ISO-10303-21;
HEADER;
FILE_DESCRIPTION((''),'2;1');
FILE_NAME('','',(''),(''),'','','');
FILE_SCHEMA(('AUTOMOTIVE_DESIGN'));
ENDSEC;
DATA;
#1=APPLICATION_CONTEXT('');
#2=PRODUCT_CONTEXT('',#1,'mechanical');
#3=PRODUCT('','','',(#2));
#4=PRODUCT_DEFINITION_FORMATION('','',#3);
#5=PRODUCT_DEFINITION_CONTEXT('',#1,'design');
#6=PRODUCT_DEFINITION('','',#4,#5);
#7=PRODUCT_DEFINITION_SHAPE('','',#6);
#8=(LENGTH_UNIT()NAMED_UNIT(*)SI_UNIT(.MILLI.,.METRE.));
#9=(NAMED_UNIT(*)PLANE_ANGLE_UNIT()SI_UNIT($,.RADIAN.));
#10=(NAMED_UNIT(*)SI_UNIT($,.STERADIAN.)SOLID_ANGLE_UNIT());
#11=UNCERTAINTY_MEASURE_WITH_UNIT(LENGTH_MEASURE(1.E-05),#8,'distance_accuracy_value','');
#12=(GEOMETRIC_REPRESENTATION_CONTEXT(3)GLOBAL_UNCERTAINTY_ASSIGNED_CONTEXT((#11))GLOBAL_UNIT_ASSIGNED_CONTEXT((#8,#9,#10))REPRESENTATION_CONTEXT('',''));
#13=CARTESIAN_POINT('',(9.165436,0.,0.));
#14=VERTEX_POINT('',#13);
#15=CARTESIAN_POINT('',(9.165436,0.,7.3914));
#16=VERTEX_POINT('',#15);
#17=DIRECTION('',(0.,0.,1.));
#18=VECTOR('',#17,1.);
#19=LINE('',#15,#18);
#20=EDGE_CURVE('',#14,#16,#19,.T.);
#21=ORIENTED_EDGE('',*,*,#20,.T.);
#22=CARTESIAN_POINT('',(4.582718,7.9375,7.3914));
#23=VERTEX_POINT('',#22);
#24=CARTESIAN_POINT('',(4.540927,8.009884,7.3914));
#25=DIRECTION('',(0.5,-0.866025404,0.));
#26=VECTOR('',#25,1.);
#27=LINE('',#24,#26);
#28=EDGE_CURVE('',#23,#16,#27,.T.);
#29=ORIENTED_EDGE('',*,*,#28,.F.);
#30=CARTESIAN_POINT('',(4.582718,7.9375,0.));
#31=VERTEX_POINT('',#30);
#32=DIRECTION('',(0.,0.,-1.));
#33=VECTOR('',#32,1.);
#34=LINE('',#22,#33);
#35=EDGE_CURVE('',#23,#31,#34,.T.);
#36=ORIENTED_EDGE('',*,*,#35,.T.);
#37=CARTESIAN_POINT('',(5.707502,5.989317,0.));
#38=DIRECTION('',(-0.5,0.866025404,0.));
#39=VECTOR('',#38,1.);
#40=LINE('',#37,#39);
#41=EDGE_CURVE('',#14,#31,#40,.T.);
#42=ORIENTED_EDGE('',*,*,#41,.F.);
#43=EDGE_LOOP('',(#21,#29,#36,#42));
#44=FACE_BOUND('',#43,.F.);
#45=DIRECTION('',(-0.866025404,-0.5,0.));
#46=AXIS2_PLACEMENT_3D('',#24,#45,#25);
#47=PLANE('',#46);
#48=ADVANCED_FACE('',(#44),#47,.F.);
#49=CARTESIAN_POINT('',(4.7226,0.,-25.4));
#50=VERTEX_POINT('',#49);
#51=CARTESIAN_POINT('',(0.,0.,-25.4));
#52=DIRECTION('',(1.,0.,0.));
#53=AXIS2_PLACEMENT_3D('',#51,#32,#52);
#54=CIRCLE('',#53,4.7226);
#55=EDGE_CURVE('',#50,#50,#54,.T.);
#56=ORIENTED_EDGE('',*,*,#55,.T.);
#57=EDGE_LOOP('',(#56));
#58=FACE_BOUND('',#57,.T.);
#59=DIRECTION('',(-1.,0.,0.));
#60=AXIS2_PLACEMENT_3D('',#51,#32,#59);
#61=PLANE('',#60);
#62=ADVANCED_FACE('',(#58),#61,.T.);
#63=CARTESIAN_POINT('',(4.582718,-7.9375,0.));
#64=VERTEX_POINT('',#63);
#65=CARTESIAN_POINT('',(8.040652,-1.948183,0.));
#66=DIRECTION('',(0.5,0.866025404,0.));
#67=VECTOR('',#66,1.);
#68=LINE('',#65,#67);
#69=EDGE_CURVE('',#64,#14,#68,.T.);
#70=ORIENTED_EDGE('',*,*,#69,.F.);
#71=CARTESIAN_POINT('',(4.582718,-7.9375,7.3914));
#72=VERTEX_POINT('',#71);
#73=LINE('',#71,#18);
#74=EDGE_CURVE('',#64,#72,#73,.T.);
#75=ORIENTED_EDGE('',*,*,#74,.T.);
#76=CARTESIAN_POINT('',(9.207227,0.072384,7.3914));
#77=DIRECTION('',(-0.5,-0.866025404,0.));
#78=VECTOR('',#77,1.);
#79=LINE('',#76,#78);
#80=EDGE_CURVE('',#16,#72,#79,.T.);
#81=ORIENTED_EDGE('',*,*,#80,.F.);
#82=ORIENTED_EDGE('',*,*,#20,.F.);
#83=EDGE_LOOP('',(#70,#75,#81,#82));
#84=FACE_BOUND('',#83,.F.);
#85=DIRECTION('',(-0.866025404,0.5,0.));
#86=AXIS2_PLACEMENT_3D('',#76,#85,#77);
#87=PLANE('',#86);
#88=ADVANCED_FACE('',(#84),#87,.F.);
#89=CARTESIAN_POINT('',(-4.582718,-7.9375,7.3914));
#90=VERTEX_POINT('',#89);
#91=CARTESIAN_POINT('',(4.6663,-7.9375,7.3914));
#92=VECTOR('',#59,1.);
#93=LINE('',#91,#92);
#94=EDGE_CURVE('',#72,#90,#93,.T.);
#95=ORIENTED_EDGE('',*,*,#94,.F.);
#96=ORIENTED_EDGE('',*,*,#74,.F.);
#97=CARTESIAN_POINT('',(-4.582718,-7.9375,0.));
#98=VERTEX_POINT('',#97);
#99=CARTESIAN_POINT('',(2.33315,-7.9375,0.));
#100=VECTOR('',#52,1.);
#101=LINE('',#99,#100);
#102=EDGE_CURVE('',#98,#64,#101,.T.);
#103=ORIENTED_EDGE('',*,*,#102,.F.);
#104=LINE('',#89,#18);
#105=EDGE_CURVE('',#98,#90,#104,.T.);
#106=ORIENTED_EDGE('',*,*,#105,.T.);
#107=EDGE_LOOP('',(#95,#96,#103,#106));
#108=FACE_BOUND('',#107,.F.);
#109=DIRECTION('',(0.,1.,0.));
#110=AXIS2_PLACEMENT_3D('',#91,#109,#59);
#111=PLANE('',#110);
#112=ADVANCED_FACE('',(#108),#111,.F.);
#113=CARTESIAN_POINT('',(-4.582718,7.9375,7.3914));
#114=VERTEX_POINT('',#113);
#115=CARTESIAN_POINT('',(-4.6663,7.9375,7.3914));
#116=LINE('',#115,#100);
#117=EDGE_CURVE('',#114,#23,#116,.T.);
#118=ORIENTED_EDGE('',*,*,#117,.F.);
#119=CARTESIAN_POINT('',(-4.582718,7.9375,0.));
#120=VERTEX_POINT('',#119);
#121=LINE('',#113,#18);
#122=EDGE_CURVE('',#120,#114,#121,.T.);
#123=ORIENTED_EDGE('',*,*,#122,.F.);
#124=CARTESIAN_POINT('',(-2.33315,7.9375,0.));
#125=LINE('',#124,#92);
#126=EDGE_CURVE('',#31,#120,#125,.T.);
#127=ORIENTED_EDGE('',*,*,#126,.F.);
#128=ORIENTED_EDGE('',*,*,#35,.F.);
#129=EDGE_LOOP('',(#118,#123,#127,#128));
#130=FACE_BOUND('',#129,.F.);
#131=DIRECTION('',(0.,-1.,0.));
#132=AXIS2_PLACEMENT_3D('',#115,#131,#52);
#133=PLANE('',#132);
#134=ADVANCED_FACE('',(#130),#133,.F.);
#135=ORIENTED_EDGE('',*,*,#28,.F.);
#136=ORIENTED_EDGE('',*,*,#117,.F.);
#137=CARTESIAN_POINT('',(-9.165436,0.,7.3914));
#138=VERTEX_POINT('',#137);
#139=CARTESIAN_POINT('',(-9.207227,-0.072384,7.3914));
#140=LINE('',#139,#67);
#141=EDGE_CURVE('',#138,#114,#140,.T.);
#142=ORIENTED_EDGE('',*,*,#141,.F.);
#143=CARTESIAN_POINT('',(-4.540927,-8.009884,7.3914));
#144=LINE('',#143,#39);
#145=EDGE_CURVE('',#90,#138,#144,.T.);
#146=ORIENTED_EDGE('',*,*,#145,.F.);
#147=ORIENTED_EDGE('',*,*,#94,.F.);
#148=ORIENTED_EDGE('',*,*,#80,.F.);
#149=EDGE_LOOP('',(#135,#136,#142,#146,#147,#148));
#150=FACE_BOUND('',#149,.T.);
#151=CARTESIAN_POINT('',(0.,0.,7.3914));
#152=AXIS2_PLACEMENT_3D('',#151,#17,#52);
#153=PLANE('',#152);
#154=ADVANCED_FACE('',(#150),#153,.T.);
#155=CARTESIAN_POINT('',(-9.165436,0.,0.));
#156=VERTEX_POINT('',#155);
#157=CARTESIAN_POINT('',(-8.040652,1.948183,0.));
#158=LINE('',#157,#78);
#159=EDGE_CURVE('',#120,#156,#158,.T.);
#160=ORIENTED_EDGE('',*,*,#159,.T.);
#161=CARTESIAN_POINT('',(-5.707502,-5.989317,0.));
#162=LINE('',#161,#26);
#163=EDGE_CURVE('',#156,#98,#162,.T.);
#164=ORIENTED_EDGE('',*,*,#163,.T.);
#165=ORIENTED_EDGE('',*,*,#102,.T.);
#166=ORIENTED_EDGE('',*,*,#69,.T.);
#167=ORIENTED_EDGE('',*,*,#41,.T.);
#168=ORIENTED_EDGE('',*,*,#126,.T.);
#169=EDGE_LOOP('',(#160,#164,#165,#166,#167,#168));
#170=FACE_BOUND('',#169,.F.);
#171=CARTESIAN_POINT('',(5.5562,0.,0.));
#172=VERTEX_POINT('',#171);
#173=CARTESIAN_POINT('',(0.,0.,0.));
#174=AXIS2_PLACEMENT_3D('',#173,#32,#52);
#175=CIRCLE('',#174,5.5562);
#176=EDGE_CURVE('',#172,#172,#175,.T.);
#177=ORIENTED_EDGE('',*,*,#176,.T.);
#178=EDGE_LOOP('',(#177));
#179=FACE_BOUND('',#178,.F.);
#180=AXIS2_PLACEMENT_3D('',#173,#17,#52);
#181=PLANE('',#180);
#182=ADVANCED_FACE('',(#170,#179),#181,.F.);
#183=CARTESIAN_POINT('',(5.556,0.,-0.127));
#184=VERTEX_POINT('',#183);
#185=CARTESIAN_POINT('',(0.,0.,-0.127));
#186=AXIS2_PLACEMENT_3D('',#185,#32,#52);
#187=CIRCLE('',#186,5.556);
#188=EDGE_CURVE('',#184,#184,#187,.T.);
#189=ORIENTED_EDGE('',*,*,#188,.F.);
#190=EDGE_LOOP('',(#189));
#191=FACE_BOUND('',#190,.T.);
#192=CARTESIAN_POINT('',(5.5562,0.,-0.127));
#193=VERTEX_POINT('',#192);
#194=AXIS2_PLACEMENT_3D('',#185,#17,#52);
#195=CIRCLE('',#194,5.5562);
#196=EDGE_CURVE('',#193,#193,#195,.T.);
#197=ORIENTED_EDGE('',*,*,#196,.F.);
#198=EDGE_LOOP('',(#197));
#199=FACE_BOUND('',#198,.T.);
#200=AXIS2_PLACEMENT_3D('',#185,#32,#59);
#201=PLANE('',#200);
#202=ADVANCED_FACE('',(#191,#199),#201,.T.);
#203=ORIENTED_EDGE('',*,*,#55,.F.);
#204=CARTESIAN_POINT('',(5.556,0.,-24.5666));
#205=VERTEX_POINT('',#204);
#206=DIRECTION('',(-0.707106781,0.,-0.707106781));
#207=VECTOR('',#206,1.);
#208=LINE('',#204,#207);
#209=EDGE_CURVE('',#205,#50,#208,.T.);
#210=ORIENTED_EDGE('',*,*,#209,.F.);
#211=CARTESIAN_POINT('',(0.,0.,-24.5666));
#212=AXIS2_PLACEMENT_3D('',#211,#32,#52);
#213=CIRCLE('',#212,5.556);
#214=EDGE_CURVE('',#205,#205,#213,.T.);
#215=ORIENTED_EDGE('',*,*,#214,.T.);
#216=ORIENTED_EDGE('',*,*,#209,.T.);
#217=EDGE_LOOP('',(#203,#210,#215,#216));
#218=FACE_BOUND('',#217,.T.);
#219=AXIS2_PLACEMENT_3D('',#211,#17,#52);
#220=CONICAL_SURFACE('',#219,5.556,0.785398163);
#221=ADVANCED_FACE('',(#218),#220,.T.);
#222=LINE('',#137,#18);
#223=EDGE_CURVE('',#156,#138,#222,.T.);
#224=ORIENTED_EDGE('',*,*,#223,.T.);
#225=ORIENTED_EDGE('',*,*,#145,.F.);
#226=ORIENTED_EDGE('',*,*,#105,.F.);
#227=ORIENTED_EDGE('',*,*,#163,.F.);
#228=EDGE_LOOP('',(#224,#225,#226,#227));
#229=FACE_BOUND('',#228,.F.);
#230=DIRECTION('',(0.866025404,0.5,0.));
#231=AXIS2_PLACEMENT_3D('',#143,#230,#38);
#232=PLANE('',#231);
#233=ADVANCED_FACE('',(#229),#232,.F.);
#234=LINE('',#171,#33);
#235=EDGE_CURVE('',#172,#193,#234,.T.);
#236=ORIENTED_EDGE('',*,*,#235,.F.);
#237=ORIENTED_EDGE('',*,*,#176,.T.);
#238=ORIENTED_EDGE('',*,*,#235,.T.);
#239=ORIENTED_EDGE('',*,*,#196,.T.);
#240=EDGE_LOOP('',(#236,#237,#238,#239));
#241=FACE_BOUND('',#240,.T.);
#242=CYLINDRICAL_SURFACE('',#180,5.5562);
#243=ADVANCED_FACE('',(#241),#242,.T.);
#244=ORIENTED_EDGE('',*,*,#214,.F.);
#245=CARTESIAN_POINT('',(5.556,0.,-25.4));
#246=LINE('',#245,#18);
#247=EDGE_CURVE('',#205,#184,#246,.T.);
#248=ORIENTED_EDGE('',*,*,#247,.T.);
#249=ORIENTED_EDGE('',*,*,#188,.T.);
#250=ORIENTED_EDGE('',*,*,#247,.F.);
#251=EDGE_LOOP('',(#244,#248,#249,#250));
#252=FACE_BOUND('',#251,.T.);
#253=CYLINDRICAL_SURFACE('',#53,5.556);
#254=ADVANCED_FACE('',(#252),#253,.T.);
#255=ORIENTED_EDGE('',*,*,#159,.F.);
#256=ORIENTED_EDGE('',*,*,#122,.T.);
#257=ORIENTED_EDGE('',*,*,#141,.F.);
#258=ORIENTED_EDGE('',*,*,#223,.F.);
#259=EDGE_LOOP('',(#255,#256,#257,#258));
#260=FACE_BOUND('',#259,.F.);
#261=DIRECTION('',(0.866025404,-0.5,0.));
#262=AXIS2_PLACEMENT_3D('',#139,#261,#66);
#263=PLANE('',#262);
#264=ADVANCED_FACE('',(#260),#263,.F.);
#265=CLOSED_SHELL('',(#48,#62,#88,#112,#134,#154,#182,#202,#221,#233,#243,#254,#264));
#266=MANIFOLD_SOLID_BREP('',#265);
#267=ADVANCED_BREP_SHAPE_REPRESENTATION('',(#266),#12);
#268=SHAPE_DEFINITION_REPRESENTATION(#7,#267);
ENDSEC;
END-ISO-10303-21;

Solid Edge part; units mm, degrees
sketch "Sketch1" plane through (0, 0, 0) normal (0, 0, 1) x (1, 0, 0)
  circle A0 centre (0, 0) radius 9.2075
  dimension "D1" = 18.415
extrude "Protrusion1" add sketch "Sketch1" along normal blind 7.3914
sketch "Sketch2" plane through (0, 0, 0) normal (0, 0, -1) x (1, 0, 0)
  circle A0 centre (0, 0) radius 5.5562
extrude "Protrusion2" add sketch "Sketch2" along normal blind 25.4
sketch "Sketch3" plane through (0, 0, -25.4) normal (0, 0, -1) x (1, 0, 0)
  circle A0 centre (0, 0) radius 5.556
extrude "Cutout1" cut sketch "Sketch3" against normal blind 25.273 flip side to cut
chamfer "Chamfer_1" distance 0.8334 angle 45 1 edges at (-5.556, 0, -25.4)
sketch "Sketch4" plane through (0, 0, 7.3914) normal (0, 0, 1) x (1, 0, 0)
  line L0 (-4.6663, 7.9375) -> (4.6663, 7.9375)
  dimension "D1" = 15.875
extrude "Cutout2" cut sketch "Sketch4" against normal up to next material side at (0, 7.9875, 7.3914)
pattern_circular "Pattern1" count 6 over 360 about axis through (0, 0, 7.3914) along (0, 0, 1) of "Cutout2"
properties part number "117632"
